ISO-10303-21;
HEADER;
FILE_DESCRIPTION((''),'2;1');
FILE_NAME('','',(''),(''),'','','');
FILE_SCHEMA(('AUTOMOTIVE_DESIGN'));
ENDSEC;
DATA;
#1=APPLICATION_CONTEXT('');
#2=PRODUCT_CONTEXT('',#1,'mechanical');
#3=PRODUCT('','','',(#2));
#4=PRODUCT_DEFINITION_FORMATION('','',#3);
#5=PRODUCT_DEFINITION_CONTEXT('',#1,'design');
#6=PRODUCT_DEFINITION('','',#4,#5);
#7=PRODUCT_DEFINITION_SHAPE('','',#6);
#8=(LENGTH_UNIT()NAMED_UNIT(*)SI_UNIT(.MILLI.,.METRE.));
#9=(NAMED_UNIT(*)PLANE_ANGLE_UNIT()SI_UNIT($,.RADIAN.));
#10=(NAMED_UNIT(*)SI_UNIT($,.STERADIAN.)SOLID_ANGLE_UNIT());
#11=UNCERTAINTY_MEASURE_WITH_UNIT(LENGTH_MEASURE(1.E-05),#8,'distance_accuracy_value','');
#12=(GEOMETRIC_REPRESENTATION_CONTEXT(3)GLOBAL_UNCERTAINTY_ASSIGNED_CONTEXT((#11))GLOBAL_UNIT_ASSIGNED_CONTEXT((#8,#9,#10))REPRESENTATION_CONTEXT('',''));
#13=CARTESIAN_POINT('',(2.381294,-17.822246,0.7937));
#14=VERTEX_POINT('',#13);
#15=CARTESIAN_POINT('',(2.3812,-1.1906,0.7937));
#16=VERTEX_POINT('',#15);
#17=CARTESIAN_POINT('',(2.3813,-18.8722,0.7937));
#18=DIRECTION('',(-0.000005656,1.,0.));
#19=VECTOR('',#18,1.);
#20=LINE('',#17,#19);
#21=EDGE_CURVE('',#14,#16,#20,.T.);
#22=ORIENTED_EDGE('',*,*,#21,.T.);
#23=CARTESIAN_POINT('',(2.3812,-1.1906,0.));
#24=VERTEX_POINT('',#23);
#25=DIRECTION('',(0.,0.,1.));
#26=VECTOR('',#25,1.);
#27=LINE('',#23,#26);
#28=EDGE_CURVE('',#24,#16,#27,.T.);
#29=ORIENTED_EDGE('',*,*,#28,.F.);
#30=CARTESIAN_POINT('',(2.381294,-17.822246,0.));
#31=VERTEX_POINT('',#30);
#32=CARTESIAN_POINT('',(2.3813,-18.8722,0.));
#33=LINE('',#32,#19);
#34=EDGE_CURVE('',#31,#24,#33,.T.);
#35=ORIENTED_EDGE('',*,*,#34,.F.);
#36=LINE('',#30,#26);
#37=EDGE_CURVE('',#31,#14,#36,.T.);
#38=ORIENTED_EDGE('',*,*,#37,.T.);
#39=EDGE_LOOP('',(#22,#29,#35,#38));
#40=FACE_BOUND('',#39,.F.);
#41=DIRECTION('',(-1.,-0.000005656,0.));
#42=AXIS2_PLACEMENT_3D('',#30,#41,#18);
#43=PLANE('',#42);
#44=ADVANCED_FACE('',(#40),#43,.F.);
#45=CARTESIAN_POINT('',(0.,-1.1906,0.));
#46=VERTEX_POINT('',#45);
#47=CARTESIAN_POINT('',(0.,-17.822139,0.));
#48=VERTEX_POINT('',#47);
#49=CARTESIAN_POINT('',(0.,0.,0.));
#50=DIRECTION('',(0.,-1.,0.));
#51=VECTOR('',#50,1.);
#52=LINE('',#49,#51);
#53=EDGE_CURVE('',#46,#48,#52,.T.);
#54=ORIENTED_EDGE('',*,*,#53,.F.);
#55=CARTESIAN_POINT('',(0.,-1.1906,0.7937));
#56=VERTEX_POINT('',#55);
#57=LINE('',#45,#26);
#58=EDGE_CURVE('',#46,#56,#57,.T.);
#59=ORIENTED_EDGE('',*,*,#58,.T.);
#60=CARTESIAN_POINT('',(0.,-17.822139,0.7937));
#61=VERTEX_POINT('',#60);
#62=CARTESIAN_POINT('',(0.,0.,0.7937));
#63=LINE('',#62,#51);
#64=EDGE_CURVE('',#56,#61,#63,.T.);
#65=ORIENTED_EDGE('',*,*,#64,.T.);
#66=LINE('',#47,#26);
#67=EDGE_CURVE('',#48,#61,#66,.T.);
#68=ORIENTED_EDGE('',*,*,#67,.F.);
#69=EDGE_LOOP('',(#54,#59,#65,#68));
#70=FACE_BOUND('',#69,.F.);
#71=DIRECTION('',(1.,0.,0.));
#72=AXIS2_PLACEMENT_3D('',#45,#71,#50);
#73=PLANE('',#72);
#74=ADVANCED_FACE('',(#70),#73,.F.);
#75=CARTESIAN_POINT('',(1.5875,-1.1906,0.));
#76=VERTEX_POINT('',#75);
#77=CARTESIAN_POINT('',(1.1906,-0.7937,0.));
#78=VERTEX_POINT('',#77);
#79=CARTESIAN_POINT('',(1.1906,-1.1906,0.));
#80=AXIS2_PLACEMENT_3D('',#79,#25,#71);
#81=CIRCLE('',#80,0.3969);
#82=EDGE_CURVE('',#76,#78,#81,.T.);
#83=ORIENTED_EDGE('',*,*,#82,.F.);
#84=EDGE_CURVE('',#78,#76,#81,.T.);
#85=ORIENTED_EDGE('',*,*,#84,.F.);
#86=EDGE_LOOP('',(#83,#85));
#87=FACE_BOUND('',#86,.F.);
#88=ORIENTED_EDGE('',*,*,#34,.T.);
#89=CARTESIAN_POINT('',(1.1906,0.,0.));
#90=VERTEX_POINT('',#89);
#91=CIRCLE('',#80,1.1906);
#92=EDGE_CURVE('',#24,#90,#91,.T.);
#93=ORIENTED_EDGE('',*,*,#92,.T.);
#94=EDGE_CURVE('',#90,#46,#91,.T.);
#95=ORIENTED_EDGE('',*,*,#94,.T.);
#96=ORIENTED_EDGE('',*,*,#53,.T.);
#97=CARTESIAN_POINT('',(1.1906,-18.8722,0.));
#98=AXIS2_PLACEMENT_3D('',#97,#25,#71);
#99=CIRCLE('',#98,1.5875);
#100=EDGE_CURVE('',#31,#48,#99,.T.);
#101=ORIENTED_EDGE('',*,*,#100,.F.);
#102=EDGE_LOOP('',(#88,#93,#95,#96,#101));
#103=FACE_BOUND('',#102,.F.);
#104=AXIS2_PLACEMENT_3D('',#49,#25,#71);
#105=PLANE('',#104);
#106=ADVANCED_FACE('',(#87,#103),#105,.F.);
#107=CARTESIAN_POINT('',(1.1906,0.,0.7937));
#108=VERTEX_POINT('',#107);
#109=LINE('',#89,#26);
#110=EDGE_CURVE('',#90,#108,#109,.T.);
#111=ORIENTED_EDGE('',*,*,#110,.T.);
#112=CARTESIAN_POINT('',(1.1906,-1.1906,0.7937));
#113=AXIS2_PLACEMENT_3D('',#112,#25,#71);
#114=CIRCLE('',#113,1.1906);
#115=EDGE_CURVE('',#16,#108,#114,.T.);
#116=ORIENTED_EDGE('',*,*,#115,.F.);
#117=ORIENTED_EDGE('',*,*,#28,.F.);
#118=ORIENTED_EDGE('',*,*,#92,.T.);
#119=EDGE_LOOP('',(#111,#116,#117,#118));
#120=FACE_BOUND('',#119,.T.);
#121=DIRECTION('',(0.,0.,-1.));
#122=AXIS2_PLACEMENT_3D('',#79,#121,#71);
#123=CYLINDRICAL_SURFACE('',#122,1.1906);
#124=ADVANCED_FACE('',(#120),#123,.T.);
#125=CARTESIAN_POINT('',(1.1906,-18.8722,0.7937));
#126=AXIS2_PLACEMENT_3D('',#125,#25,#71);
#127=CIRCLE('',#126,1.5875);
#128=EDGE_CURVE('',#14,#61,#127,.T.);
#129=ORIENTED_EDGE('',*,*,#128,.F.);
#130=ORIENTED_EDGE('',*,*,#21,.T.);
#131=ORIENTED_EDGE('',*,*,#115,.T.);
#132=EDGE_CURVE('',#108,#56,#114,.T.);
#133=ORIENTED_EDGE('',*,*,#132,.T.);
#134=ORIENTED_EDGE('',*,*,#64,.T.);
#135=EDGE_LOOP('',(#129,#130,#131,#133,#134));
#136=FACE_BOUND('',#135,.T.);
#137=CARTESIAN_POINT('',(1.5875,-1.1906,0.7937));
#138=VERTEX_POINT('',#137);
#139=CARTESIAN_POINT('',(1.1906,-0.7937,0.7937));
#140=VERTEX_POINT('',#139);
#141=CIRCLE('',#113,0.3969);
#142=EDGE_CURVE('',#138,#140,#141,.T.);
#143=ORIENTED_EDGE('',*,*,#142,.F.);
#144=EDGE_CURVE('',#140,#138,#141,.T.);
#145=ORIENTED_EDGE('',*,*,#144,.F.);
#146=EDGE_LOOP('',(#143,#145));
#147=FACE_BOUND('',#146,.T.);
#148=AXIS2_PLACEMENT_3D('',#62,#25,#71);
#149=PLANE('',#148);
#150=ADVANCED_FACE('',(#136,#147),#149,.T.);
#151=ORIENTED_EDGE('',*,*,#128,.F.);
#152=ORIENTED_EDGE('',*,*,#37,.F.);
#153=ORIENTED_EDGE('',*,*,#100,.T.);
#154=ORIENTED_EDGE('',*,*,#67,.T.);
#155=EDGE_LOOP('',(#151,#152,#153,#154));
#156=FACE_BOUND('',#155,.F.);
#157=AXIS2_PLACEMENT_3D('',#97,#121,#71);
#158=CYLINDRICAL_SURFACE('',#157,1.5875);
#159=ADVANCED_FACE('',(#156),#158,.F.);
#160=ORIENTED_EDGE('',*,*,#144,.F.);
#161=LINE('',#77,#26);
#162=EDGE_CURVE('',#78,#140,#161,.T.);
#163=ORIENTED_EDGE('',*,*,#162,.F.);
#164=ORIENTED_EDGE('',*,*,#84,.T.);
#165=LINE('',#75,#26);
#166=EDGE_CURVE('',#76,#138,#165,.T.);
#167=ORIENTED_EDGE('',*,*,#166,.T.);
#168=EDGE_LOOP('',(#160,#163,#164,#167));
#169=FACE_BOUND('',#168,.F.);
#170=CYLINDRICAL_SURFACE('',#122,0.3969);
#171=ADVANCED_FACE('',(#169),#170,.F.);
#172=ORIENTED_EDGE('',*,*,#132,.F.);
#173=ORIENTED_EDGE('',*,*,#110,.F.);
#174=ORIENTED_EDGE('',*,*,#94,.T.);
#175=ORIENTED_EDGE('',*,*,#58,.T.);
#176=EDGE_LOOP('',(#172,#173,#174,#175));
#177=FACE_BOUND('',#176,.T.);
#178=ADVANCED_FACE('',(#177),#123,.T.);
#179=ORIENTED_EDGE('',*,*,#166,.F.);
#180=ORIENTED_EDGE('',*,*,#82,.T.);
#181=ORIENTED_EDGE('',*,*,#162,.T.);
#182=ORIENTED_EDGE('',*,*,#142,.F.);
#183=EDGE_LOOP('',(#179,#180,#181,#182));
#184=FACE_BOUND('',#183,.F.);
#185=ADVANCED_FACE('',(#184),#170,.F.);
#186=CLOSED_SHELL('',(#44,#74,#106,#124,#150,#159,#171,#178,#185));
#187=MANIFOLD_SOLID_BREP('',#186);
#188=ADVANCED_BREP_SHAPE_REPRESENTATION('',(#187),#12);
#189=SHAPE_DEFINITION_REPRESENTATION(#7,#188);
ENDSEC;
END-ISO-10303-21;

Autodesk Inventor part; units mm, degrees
ref_plane "YZ Plane" through (0, 0, 0) normal (1, 0, 0) x (0, 1, 0)
ref_plane "XZ Plane" through (0, 0, 0) normal (0, 1, 0) x (-1, 0, 0)
ref_plane "XY Plane" through (0, 0, 0) normal (0, 0, 1) x (1, 0, 0)
sketch "Sketch1" plane through (0, 0, 0) normal (0, 0, 1) x (1, 0, 0)
  circle A0 centre (1.1906, -1.1906) radius 0.3969
  arc A1 (2.3812, -1.1906) -> (0, -1.1906) centre (1.1906, -1.1906) ccw
  line L0 (1.1906, -1.1906) -> (1.1906, 0)
  line L1 (0, 0) -> (0, -18.8722)
  line L2 (0, -18.8722) -> (2.3813, -18.8722)
  line L3 (2.3813, -18.8722) -> (2.3812, -1.1906)
  circle A2 centre (1.1906, -18.8722) radius 1.5875
  point P0 (1.1906, 0)
  point P1 (0, -1.1906)
  point P2 (0, -17.8222)
  point P3 (2.3813, -17.8222)
  point P4 (2.3813, -1.1906)
  dimension "d4" = 18.8722
  dimension "d5" = 3.175
extrude "Extrusion1" add sketch "Sketch1" along normal blind 0.7937 contours L3 A2 L1 A1
properties part number "Conn Rod Rod Portion"
